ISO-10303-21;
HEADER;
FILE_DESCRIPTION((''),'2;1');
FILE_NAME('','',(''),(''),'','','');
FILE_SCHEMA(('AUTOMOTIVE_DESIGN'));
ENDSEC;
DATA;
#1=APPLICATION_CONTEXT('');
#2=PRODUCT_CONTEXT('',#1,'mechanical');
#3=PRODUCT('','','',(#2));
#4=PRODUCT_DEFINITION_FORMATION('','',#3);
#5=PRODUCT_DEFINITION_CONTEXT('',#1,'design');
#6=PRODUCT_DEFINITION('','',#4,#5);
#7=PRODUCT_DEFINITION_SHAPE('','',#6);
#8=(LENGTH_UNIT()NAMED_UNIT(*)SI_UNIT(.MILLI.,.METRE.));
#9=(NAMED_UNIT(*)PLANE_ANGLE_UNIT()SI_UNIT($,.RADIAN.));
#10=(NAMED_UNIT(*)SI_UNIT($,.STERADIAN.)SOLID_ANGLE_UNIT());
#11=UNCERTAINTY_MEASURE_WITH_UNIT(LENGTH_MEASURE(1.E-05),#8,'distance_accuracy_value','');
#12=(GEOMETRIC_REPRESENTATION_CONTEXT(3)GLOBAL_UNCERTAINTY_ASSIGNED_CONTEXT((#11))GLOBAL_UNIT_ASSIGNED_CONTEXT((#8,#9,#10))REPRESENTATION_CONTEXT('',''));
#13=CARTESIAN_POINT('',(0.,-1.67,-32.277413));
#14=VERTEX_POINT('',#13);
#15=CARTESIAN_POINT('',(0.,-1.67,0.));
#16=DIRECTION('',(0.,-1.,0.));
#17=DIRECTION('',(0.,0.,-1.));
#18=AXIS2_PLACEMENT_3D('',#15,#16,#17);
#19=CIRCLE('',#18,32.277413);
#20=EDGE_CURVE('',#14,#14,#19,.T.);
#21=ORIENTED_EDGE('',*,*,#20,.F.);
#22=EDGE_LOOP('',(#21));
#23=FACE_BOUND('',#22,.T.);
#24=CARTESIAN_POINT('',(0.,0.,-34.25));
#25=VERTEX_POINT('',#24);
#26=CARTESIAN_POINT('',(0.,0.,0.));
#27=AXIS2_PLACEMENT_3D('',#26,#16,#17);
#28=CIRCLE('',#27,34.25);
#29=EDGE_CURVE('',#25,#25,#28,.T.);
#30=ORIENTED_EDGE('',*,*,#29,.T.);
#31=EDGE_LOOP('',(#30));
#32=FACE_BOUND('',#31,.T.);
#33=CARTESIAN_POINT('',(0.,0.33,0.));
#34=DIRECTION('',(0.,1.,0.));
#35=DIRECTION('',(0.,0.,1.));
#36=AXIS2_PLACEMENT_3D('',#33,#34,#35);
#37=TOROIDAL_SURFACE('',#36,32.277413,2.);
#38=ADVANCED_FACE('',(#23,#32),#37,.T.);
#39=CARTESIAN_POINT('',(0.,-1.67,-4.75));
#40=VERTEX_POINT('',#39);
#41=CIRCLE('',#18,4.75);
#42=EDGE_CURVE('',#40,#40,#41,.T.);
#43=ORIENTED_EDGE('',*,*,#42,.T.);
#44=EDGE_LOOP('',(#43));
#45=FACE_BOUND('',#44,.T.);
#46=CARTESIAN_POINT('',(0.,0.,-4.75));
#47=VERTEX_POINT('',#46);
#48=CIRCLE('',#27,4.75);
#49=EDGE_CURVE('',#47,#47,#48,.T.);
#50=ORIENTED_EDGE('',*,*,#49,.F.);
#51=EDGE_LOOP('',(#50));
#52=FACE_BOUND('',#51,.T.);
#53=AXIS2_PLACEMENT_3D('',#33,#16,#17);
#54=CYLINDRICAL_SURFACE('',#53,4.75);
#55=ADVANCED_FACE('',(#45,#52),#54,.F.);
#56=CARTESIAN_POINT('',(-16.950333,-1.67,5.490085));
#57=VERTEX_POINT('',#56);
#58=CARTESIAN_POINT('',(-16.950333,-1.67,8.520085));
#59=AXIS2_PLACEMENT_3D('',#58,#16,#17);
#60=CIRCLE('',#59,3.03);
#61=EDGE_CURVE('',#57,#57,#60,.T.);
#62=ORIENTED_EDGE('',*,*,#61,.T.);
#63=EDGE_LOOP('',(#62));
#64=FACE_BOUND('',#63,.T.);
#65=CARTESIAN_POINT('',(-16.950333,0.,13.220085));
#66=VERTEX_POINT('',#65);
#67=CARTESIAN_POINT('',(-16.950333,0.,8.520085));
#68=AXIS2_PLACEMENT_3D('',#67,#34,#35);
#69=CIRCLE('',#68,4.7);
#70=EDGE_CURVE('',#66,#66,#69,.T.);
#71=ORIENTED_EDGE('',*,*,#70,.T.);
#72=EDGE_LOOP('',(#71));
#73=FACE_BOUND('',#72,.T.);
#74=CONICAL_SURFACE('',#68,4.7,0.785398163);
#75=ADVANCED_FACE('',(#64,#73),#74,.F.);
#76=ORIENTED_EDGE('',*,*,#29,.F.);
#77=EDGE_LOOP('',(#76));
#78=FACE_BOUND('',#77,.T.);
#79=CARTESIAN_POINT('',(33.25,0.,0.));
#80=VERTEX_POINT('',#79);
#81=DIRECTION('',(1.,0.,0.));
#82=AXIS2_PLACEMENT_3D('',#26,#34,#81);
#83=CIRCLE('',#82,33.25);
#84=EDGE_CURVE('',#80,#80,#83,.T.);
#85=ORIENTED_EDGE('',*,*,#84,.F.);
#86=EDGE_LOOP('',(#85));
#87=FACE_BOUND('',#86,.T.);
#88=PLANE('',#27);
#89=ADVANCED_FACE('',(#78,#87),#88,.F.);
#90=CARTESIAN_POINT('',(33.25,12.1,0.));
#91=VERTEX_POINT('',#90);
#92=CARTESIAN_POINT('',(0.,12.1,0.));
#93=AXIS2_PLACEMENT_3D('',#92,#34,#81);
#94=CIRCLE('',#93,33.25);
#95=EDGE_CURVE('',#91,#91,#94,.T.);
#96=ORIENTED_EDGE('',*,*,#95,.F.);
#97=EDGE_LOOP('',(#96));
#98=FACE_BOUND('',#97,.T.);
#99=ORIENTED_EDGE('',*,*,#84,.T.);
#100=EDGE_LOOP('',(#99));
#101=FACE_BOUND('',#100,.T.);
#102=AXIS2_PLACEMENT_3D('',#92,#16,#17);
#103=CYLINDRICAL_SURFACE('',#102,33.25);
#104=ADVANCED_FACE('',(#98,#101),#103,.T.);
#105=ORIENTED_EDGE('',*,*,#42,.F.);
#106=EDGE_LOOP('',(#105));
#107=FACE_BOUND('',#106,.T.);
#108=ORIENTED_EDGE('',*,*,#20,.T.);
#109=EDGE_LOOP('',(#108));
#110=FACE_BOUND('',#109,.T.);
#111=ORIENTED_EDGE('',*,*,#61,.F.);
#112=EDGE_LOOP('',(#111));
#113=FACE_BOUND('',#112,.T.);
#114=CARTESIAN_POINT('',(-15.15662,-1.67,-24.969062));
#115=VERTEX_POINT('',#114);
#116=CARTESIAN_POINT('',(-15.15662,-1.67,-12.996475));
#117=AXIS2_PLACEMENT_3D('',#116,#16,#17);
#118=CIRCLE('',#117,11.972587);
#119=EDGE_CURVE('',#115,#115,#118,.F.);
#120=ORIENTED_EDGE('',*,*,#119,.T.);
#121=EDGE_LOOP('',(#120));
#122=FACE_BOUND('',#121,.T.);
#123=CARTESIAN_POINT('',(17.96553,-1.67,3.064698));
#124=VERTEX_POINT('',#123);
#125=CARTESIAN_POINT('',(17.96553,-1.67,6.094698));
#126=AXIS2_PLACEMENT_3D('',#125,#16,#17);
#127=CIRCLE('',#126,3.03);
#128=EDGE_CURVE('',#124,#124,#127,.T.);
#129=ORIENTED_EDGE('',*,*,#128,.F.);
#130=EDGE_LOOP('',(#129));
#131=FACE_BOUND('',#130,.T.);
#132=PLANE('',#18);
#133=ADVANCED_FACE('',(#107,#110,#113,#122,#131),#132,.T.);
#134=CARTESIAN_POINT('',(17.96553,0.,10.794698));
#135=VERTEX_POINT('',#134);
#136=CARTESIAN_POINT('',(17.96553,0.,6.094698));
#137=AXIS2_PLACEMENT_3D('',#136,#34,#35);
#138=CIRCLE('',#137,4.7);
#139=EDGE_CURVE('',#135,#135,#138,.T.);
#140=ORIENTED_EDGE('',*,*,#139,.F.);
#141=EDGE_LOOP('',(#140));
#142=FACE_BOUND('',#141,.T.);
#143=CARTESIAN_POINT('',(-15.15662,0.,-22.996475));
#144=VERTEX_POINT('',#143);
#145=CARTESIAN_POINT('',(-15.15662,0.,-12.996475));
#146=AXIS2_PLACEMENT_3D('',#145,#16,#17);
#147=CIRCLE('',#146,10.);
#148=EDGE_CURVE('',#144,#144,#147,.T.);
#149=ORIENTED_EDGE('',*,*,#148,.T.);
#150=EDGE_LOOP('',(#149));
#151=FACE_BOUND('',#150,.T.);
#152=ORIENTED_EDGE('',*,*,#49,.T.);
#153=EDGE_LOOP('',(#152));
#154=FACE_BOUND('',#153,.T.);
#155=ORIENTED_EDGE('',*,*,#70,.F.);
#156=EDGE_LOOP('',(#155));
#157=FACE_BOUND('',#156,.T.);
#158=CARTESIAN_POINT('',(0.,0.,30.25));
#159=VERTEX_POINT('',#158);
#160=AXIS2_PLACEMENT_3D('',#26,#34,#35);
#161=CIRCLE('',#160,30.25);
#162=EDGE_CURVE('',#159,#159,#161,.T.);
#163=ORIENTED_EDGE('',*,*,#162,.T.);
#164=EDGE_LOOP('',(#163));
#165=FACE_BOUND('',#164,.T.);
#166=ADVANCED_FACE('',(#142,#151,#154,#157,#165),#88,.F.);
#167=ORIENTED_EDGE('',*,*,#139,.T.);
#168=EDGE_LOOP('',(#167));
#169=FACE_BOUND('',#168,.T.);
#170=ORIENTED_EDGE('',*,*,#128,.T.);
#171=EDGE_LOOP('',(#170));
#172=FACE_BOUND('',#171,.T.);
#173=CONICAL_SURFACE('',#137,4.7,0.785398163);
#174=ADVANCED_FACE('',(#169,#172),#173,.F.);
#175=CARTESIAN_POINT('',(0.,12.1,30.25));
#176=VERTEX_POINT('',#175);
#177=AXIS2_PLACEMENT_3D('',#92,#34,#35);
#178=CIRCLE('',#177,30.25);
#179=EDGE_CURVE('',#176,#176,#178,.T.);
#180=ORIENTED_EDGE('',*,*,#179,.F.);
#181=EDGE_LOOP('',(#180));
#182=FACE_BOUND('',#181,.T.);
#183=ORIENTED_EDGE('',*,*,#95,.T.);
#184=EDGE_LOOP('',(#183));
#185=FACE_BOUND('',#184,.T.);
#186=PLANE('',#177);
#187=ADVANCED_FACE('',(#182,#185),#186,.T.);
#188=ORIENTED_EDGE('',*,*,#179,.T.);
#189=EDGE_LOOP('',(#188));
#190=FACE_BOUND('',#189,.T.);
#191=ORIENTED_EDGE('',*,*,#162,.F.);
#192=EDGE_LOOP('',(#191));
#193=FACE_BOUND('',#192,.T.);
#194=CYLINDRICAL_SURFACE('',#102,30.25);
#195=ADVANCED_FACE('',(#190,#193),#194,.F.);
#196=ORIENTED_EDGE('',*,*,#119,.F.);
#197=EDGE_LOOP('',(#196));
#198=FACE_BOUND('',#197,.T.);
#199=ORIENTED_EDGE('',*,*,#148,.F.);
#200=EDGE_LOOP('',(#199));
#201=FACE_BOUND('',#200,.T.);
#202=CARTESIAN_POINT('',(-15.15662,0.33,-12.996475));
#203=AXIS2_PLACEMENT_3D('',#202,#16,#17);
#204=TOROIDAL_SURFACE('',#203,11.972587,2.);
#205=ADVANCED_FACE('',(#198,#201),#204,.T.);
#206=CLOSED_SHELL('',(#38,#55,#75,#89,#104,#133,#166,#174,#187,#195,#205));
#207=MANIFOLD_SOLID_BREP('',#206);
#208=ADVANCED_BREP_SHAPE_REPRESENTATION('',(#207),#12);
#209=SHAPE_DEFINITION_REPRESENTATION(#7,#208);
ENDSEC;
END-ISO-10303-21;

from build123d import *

# Parameters (mm, degrees)
SKETCH1_R           = 33.25
SKETCH1_R_2         = 30.25
EXTRUDE_THIN5_DEPTH = 12.1
SKETCH2_R           = 34.25
BOSS_EXTRUDE1_DEPTH = 1.67
SKETCH3_R           = 4.75
CUT_EXTRUDE1_DEPTH  = 2
SKETCH6_R           = 10
CUT_EXTRUDE4_DEPTH  = 2
FILLET1_R           = 2
FILLET2_R           = 2
SKETCH13_R          = 1.75
CUT_EXTRUDE6_DEPTH  = 5


# Read off the part's stored shape, not the designer's step: CSK for M4 Countersunk Flat Head Screw1
with BuildPart() as part:
    # Sketch1 → Extrude-Thin5 (new body)
    with BuildSketch(Plane(origin=(0, 0, 0), x_dir=(1, 0, 0), z_dir=(0, 1, 0))):
        Circle(SKETCH1_R)
        Circle(SKETCH1_R_2, mode=Mode.SUBTRACT)
    extrude(amount=EXTRUDE_THIN5_DEPTH)

    # Sketch2 → Boss-Extrude1 (add)
    with BuildSketch(Plane.XZ):
        with Locations(Location((0, 0, 0), (0, 0, 270))):
            Circle(SKETCH2_R)
    extrude(amount=BOSS_EXTRUDE1_DEPTH)

    # Sketch3 → Cut-Extrude1 (cut)
    with BuildSketch(Plane.XZ.offset(1.67)):
        with Locations(Location((0, 0, 0), (0, 0, 270))):
            Circle(SKETCH3_R)
    extrude(amount=-CUT_EXTRUDE1_DEPTH, mode=Mode.SUBTRACT)

    # Sketch6 → Cut-Extrude4 (cut)
    with BuildSketch(Plane.XZ.offset(1.67)):
        with Locations(Location((-15.156619939, -12.99647525, 0), (0, 0, 270))):
            Circle(SKETCH6_R)
    extrude(amount=-CUT_EXTRUDE4_DEPTH, mode=Mode.SUBTRACT)

    # Fillet1
    # the kernel refuses this fillet: 2 mm, written as the material it takes off along each edge
    with BuildSketch(Plane(origin=(0, -1.67, 0), x_dir=(0, 0, -1), z_dir=(-1, 0, 0))) as fillet1_piece_1:
        with BuildLine():
            CenterArc((32.277412866, -2), FILLET1_R, 9.497234469, 80.502765531)
            Line((32.277412866, 0), (32.277412866, 0.04))
            Line((32.277412866, 0.04), (34.25, 0.04))
            Line((34.25, 0.04), (34.29, 0))
            ThreePointArc((34.29, 0), (34.29, -0.835), (34.289451743, -1.6634))
            Line((34.289451743, -1.6634), (34.25, -1.67))
        make_face()
    revolve(axis=Axis((0, -1.67, 0), (0, -1, 0)), mode=Mode.SUBTRACT)

    # Fillet2
    # the kernel refuses this fillet: 2 mm, written as the material it takes off along each edge
    with BuildSketch(Plane(origin=(-15.156619939, -1.67, -12.99647525), x_dir=(0, 0, -1), z_dir=(-1, 0, 0))) as fillet2_piece_1:
        with BuildLine():
            CenterArc((11.972587134, -2), FILLET2_R, 90, 80.502765531)
            Line((10, -1.67), (9.960548257, -1.6634))
            ThreePointArc((9.960548257, -1.6634), (9.96, -0.835), (9.96, 0))
            Line((9.96, 0), (10, 0.04))
            Line((10, 0.04), (11.972587134, 0.04))
            Line((11.972587134, 0.04), (11.972587134, 0))
        make_face()
    revolve(axis=Axis((-15.156619939, -1.67, -12.99647525), (0, -1, 0)), mode=Mode.SUBTRACT)

    # Sketch13 → Cut-Extrude6 (cut)
    with BuildSketch(Plane.XZ.offset(1.67)):
        with Locations(Location((-16.950332705, 8.520084869, 0), (0, 0, 270))):
            Circle(SKETCH13_R)
        with Locations(Location((17.965530419, 6.094697839, 0), (0, 0, 270))):
            Circle(SKETCH13_R)
    extrude(amount=-CUT_EXTRUDE6_DEPTH, mode=Mode.SUBTRACT)

    # CSK for M4 Countersunk Flat Head Scr 2 → CSK for M4 Countersunk Flat Head Screw1 (revolve, cut)
    with BuildSketch(Plane(origin=(17.965530419, 0, 6.094697839), x_dir=(1, 0, 0), z_dir=(0, 0, 1))):
        Polygon((4.7, 0), (1.75, 0), (1.75, -1.67), (3.03, -1.67), align=None)
    revolve(axis=Axis((17.965530419, 0, 6.094697839), (0, 1, 0)), mode=Mode.SUBTRACT)

    # CSK for M4 Countersunk Flat Head Scr 3 o → CSK for M4 Countersunk Flat Head Scr 3 (revolve, cut)
    with BuildSketch(Plane(origin=(-16.950332705, 0, 8.520084869), x_dir=(1, 0, 0), z_dir=(0, 0, 1))):
        Polygon((4.7, 0), (1.75, 0), (1.75, -1.67), (3.03, -1.67), align=None)
    revolve(axis=Axis((-16.950332705, 0, 8.520084869), (0, 1, 0)), mode=Mode.SUBTRACT)


solid = part.part
